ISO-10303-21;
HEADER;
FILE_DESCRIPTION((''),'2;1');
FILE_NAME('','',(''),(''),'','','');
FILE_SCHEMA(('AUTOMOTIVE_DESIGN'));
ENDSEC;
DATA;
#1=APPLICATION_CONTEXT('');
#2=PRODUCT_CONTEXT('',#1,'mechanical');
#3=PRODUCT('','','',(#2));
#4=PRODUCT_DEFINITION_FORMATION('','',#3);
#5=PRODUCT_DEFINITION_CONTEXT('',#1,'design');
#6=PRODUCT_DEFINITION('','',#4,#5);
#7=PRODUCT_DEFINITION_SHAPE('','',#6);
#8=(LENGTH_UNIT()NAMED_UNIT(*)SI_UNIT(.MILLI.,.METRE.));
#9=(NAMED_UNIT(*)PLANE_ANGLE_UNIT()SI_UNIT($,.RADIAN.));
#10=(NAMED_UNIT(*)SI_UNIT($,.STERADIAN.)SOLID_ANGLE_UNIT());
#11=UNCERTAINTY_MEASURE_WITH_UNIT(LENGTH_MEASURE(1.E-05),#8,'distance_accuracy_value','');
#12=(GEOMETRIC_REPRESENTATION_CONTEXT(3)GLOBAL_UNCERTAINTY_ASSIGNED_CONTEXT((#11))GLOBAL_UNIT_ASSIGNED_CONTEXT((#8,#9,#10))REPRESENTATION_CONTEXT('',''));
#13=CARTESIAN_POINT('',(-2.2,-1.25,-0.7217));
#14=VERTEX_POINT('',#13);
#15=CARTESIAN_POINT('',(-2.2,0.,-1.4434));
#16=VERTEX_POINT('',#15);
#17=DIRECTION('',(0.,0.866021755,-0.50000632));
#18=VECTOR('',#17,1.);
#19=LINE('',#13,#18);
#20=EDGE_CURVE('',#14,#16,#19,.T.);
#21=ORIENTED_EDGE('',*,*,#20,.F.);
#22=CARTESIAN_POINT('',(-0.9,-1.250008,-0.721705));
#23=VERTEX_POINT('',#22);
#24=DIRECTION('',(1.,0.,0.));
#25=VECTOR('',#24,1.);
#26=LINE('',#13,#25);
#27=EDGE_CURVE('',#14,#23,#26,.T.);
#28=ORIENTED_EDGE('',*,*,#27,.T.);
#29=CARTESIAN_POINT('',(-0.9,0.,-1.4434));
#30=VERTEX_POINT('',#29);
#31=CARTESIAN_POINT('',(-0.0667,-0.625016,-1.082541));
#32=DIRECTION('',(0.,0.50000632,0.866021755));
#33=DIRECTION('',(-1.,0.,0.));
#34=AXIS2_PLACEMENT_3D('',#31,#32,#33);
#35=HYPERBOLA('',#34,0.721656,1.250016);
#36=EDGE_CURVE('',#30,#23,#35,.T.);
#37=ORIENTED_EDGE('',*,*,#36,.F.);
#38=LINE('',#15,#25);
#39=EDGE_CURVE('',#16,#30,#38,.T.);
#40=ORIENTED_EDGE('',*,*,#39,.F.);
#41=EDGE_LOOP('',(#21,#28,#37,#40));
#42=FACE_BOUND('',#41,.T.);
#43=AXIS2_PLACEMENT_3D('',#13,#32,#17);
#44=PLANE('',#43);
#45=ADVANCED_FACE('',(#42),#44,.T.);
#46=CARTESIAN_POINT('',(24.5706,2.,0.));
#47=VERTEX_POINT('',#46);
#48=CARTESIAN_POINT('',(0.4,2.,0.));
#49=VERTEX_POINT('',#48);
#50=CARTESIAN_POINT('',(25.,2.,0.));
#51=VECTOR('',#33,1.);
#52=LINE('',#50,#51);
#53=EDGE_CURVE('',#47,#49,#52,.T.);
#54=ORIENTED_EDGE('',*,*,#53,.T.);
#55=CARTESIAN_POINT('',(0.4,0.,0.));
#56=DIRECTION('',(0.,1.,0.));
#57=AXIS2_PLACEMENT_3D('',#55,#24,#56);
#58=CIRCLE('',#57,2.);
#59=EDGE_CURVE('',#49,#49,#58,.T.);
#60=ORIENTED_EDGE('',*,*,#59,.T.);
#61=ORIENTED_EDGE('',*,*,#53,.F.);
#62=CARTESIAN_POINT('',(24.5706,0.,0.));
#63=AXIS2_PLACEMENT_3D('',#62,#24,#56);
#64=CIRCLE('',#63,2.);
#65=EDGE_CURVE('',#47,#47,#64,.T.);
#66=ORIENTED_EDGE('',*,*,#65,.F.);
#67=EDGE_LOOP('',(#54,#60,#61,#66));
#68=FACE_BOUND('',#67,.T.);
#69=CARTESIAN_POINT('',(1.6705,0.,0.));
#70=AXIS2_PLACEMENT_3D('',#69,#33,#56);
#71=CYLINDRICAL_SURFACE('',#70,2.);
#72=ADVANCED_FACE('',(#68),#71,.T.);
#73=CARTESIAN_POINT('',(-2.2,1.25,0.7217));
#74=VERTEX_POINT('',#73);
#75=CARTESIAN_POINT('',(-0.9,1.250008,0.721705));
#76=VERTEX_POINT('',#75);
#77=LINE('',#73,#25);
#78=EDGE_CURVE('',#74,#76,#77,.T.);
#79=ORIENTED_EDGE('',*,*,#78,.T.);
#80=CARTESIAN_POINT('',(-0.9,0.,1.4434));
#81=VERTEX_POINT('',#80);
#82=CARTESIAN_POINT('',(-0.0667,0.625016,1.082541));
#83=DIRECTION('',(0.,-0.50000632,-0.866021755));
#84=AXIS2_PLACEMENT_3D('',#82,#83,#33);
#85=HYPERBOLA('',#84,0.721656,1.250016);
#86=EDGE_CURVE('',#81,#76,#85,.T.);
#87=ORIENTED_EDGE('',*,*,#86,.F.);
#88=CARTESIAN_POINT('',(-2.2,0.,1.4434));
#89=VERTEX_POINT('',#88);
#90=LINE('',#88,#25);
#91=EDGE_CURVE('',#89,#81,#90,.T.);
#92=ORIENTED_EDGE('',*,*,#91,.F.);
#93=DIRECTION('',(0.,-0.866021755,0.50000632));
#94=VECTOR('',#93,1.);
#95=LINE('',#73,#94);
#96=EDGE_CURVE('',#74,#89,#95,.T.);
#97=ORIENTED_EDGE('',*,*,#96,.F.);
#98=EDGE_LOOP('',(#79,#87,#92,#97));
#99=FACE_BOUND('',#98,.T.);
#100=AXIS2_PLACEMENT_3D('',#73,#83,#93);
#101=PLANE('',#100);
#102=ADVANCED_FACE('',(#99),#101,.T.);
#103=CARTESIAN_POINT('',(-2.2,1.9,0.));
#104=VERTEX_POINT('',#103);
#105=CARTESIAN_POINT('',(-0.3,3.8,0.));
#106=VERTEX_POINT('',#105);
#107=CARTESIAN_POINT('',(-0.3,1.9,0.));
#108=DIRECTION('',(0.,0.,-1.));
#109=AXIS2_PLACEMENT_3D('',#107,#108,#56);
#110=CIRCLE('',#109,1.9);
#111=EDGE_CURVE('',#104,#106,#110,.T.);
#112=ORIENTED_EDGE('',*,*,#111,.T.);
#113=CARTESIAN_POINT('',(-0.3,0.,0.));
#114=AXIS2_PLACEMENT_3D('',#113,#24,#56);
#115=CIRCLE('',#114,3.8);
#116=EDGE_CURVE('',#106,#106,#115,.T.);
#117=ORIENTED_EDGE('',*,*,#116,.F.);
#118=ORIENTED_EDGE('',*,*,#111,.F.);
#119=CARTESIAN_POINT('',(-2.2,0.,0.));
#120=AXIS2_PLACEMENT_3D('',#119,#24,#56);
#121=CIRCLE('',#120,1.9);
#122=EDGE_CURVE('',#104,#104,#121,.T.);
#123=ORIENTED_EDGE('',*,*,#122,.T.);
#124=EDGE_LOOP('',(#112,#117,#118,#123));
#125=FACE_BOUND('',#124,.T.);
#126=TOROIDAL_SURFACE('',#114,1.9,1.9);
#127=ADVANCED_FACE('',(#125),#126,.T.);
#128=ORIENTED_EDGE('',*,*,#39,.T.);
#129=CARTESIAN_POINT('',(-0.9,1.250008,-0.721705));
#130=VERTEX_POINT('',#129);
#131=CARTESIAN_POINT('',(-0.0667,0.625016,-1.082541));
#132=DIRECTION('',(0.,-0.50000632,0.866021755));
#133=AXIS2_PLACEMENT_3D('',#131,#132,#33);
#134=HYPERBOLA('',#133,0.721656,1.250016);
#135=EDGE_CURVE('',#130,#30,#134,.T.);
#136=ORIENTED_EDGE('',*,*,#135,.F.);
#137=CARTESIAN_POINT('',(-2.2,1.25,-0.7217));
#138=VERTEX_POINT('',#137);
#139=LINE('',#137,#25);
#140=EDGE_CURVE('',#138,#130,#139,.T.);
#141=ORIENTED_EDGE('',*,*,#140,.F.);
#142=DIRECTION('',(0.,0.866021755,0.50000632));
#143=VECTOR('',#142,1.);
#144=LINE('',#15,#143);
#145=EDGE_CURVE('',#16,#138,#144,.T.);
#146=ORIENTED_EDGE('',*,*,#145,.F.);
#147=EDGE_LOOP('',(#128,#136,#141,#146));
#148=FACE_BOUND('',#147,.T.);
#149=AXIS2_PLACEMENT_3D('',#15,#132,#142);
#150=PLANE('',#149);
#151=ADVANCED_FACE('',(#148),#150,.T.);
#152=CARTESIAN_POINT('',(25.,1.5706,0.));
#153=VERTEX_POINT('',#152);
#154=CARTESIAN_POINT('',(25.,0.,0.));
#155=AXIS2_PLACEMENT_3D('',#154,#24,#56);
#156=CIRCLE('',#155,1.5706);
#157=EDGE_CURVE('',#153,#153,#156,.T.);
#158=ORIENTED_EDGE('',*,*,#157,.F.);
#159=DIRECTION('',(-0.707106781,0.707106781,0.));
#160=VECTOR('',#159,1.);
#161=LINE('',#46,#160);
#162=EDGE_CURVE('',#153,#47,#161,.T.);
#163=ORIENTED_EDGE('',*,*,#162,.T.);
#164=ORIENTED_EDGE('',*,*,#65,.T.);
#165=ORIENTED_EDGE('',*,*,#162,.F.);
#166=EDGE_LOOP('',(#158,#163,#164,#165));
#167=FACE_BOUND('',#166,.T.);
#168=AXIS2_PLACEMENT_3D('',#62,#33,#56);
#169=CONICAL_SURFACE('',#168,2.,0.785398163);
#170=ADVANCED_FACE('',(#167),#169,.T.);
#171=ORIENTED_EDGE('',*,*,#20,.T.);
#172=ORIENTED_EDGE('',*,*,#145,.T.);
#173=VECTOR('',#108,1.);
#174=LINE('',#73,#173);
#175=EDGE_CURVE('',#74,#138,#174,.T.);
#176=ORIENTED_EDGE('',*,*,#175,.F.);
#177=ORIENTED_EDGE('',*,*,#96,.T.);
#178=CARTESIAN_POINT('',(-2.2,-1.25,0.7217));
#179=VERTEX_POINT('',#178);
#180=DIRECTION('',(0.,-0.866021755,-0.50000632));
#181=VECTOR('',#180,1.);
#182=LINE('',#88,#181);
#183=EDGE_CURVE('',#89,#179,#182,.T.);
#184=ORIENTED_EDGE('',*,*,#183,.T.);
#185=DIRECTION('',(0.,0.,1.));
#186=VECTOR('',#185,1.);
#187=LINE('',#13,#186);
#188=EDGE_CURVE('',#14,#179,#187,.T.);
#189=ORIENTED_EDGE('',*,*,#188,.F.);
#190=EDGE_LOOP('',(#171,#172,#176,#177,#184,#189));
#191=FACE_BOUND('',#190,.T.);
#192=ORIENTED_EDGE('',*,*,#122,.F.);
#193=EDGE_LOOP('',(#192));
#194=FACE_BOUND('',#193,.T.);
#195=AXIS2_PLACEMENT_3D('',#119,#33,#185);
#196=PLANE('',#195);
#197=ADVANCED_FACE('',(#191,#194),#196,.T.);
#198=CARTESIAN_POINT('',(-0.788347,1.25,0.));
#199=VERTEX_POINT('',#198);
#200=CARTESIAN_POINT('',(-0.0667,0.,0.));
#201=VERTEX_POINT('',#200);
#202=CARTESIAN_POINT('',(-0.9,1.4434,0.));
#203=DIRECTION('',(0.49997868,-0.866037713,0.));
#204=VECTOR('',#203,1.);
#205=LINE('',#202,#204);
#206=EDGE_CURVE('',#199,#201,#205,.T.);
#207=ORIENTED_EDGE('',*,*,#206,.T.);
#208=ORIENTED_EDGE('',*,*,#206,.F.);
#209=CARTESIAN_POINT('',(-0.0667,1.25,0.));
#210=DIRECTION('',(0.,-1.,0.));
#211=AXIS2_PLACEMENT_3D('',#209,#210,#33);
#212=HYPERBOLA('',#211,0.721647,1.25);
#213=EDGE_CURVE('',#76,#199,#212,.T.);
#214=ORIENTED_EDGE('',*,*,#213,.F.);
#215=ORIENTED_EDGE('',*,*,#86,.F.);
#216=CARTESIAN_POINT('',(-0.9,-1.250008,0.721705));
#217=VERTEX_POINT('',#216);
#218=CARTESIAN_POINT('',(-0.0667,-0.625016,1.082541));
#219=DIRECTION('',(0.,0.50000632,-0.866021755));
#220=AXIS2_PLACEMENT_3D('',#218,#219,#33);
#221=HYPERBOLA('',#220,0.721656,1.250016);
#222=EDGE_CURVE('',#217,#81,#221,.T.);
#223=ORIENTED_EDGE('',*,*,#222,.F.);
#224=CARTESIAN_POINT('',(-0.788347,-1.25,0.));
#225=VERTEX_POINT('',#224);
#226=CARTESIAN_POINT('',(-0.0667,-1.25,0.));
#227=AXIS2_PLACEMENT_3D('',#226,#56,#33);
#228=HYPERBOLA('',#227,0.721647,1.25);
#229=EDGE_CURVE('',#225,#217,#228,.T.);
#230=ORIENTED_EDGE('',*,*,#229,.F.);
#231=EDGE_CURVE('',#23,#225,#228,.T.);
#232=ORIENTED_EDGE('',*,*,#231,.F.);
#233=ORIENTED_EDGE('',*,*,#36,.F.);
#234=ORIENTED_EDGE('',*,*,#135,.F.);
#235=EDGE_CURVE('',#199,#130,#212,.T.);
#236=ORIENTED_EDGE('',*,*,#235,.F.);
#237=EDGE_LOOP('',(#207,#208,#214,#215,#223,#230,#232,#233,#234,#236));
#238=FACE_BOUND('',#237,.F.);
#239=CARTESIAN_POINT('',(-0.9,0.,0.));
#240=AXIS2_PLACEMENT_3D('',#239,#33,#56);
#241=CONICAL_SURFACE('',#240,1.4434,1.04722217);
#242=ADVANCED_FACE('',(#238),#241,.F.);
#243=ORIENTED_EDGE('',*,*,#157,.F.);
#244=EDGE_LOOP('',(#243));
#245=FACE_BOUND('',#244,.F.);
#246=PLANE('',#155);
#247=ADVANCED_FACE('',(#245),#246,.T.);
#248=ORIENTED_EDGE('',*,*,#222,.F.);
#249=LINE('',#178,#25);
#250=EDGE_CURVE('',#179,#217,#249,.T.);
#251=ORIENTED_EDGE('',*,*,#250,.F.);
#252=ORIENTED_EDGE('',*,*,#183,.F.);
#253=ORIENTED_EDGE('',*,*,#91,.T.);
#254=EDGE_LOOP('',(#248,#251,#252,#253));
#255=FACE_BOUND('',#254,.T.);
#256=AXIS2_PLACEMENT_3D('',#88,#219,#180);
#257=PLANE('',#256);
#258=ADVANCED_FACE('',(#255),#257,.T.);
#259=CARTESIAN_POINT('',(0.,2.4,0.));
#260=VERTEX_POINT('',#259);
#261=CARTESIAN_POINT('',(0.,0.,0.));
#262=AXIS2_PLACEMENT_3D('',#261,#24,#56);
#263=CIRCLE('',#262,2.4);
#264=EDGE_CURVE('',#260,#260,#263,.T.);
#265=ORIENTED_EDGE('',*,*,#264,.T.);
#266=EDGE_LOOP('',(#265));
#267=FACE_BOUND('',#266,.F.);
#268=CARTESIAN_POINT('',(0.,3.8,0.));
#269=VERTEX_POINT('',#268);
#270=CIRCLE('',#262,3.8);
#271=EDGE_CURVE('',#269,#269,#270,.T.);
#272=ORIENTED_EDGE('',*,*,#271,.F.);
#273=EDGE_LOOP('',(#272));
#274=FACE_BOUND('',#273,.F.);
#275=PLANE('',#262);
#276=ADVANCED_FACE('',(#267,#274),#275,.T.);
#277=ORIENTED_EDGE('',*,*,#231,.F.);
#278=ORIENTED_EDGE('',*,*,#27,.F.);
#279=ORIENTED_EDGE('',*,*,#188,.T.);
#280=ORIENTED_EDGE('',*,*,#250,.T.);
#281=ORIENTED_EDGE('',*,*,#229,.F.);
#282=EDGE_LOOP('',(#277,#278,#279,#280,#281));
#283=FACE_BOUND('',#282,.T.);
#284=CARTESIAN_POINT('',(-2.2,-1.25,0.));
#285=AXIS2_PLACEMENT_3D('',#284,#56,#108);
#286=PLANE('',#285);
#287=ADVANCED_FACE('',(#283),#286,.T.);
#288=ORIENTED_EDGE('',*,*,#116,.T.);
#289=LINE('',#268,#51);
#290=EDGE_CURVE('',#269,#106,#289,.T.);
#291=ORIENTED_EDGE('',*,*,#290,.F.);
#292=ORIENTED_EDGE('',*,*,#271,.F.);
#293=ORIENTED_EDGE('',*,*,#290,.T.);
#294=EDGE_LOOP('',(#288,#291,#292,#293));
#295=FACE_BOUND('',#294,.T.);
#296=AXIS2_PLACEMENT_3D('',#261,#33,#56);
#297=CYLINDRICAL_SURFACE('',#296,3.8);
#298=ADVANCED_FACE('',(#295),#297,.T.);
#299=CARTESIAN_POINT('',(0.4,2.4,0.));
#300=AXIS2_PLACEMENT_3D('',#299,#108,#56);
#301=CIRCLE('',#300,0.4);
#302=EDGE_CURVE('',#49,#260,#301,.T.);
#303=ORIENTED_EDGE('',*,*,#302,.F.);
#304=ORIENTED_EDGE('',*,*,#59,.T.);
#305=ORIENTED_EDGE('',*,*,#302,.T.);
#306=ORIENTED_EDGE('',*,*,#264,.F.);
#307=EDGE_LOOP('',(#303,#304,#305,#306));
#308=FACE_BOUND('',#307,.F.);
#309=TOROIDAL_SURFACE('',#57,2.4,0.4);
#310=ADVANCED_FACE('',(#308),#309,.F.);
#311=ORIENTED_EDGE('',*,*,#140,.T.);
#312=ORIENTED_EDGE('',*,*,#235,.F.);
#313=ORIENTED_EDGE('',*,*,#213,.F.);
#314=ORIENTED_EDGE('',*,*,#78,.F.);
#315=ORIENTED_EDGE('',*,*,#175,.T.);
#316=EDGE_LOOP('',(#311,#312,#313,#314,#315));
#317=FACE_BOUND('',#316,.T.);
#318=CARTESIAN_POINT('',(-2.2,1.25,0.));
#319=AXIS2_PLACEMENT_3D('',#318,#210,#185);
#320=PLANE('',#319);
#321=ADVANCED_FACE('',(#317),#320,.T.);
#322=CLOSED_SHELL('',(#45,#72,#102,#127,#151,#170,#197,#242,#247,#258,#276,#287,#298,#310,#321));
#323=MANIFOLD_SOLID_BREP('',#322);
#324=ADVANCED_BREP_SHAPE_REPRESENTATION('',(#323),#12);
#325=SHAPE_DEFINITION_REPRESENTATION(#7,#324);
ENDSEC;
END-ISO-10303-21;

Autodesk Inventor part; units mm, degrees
ref_plane "YZ Plane" through (0, 0, 0) normal (1, 0, 0) x (0, 1, 0)
ref_plane "XZ Plane" through (0, 0, 0) normal (0, 1, 0) x (-1, 0, 0)
sketch "Sketch1" plane through (0, 0, 0) normal (0, 0, 1) x (1, 0, 0)
  line L0 (-0.0667, 0) -> (25, 0)
  line L1 (25, 0) -> (25, 2)
  line L2 (25, 2) -> (2.1, 2)
  line L3 (2.1, 2) -> (1.6705, 2)
  line L4 (1.6705, 2) -> (0, 2)
  line L5 (0, 2) -> (0, 3.8)
  line L6 (0, 3.8) -> (-2.2, 3.8)
  line L7 (-2.2, 3.8) -> (-2.2, 1.4434)
  line L8 (-2.2, 1.4434) -> (-0.9, 1.4434)
  line L9 (-0.9, 1.4434) -> (-0.0667, 0)
  line L10 (-7.64, 0) -> (30.44, 0) projected
  line L11 (0, -0.76) -> (0, 4.56) projected
  line L12 (2.1, 2) -> (0, 2) construction
  dimension "d1" = 22.9
  dimension "d2" = 0.4295
  dimension "d3" = 2.2
  dimension "d4" = 1.3
  dimension "d5" = 60
  dimension "d6" = 4
  dimension "d7" = 4
  dimension "d8" = 2.8868
  dimension "d9" = 7.6
  dimension "d26" = 25
revolve "Body" add sketch "Sketch1" angle 360 about axis through (-0.0667, 0, 0) along (1, 0, 0)
sketch "Sketch2" plane through (-2.2, 0, 0) normal (-1, 0, 0) x (0, 0, 1)
  circle A0 centre (0, 0) radius 1.4434 projected
  line L0 (0, -5.32) -> (0, 5.32) projected
  line L1 (-5.32, 0) -> (5.32, 0) projected
  line L2 (1.4434, 0) -> (0.7217, -1.25)
  line L3 (0.7217, -1.25) -> (-0.7217, -1.25)
  line L4 (-0.7217, -1.25) -> (-1.4434, 0)
  line L5 (-1.4434, 0) -> (-0.7217, 1.25)
  line L6 (-0.7217, 1.25) -> (0.7217, 1.25)
  line L7 (0.7217, 1.25) -> (1.4434, 0)
extrude "Slot" add sketch "Sketch2" against normal up to next contours L7 A0 | A0 L2 | L6 L0 A0 | A0 L0 L3 | L0 L6 A0 | A0 L3 L0 | L4 A0 | A0 L5
fillet "Fillet1" radius 1.9 1 edges at (-2.2, -3.8, 0)
thread "Thread" size "M4x0.7" class "6g" standard "ISO Metric profile" length 22.9
chamfer "Chamfer1" distance 0.4294 distance2 0.4294 1 edges at (25, -2, 0) measured on face at (25, 0.6473, 0.1595)
ref_plane "Work Plane1" through (29, 0, 0) normal (0, -1, 0) x (1, 0, 0)
fillet "Fillet2" radius 0.4 1 edges at (0, -2, 0)
equation "\"d30\" = R"
equation "\"d17\" = RR"
equation "\"d13\" = GEL"
equation "\"d15\" = -0.5 * SPD + 0.5 * GD"
equation "\"d16\" = GUL"
equation "\"d1\" = GEL"
equation "\"d3\" = KOH"
equation "\"d4\" = INTI"
equation "\"d6\" = GD"
equation "\"d7\" = BDM"
equation "\"d8\" = 1.1547 * SW"
equation "\"d9\" = KOD"
equation "\"d26\" = NLG"
equation "\"GD\" = NND"
equation "\"NLG\" = 25"
equation "\"GEL\" = 22.9"
equation "\"KOD\" = 7.6"
equation "\"KOH\" = 2.2"
equation "\"INTI\" = 1.3"
equation "\"GAL\" = 0.61345 * PTC"
equation "\"GUL\" = 0.61345 * PTC"
equation "\"BDM\" = NND"
equation "\"SW\" = 2.5"
equation "\"RR\" = 1.9"
equation "\"SPD\" = NND - 1.2269 * PTC"
equation "\"R\" = 0.4"
equation "\"TOA\" = 30deg"
equation "\"GD1\" = THREADDIA - 1.2269 * PTC"
equation "\"THREADDIA\" = 4"
equation "\"PTC\" = 0.7"
equation "\"NND\" = 4"
equation "\"KOH1\" = 0.3"
equation "\"E0\" = 2.873"
properties part number "ISO 7380-1 - M4 x 25" material "Steel"
